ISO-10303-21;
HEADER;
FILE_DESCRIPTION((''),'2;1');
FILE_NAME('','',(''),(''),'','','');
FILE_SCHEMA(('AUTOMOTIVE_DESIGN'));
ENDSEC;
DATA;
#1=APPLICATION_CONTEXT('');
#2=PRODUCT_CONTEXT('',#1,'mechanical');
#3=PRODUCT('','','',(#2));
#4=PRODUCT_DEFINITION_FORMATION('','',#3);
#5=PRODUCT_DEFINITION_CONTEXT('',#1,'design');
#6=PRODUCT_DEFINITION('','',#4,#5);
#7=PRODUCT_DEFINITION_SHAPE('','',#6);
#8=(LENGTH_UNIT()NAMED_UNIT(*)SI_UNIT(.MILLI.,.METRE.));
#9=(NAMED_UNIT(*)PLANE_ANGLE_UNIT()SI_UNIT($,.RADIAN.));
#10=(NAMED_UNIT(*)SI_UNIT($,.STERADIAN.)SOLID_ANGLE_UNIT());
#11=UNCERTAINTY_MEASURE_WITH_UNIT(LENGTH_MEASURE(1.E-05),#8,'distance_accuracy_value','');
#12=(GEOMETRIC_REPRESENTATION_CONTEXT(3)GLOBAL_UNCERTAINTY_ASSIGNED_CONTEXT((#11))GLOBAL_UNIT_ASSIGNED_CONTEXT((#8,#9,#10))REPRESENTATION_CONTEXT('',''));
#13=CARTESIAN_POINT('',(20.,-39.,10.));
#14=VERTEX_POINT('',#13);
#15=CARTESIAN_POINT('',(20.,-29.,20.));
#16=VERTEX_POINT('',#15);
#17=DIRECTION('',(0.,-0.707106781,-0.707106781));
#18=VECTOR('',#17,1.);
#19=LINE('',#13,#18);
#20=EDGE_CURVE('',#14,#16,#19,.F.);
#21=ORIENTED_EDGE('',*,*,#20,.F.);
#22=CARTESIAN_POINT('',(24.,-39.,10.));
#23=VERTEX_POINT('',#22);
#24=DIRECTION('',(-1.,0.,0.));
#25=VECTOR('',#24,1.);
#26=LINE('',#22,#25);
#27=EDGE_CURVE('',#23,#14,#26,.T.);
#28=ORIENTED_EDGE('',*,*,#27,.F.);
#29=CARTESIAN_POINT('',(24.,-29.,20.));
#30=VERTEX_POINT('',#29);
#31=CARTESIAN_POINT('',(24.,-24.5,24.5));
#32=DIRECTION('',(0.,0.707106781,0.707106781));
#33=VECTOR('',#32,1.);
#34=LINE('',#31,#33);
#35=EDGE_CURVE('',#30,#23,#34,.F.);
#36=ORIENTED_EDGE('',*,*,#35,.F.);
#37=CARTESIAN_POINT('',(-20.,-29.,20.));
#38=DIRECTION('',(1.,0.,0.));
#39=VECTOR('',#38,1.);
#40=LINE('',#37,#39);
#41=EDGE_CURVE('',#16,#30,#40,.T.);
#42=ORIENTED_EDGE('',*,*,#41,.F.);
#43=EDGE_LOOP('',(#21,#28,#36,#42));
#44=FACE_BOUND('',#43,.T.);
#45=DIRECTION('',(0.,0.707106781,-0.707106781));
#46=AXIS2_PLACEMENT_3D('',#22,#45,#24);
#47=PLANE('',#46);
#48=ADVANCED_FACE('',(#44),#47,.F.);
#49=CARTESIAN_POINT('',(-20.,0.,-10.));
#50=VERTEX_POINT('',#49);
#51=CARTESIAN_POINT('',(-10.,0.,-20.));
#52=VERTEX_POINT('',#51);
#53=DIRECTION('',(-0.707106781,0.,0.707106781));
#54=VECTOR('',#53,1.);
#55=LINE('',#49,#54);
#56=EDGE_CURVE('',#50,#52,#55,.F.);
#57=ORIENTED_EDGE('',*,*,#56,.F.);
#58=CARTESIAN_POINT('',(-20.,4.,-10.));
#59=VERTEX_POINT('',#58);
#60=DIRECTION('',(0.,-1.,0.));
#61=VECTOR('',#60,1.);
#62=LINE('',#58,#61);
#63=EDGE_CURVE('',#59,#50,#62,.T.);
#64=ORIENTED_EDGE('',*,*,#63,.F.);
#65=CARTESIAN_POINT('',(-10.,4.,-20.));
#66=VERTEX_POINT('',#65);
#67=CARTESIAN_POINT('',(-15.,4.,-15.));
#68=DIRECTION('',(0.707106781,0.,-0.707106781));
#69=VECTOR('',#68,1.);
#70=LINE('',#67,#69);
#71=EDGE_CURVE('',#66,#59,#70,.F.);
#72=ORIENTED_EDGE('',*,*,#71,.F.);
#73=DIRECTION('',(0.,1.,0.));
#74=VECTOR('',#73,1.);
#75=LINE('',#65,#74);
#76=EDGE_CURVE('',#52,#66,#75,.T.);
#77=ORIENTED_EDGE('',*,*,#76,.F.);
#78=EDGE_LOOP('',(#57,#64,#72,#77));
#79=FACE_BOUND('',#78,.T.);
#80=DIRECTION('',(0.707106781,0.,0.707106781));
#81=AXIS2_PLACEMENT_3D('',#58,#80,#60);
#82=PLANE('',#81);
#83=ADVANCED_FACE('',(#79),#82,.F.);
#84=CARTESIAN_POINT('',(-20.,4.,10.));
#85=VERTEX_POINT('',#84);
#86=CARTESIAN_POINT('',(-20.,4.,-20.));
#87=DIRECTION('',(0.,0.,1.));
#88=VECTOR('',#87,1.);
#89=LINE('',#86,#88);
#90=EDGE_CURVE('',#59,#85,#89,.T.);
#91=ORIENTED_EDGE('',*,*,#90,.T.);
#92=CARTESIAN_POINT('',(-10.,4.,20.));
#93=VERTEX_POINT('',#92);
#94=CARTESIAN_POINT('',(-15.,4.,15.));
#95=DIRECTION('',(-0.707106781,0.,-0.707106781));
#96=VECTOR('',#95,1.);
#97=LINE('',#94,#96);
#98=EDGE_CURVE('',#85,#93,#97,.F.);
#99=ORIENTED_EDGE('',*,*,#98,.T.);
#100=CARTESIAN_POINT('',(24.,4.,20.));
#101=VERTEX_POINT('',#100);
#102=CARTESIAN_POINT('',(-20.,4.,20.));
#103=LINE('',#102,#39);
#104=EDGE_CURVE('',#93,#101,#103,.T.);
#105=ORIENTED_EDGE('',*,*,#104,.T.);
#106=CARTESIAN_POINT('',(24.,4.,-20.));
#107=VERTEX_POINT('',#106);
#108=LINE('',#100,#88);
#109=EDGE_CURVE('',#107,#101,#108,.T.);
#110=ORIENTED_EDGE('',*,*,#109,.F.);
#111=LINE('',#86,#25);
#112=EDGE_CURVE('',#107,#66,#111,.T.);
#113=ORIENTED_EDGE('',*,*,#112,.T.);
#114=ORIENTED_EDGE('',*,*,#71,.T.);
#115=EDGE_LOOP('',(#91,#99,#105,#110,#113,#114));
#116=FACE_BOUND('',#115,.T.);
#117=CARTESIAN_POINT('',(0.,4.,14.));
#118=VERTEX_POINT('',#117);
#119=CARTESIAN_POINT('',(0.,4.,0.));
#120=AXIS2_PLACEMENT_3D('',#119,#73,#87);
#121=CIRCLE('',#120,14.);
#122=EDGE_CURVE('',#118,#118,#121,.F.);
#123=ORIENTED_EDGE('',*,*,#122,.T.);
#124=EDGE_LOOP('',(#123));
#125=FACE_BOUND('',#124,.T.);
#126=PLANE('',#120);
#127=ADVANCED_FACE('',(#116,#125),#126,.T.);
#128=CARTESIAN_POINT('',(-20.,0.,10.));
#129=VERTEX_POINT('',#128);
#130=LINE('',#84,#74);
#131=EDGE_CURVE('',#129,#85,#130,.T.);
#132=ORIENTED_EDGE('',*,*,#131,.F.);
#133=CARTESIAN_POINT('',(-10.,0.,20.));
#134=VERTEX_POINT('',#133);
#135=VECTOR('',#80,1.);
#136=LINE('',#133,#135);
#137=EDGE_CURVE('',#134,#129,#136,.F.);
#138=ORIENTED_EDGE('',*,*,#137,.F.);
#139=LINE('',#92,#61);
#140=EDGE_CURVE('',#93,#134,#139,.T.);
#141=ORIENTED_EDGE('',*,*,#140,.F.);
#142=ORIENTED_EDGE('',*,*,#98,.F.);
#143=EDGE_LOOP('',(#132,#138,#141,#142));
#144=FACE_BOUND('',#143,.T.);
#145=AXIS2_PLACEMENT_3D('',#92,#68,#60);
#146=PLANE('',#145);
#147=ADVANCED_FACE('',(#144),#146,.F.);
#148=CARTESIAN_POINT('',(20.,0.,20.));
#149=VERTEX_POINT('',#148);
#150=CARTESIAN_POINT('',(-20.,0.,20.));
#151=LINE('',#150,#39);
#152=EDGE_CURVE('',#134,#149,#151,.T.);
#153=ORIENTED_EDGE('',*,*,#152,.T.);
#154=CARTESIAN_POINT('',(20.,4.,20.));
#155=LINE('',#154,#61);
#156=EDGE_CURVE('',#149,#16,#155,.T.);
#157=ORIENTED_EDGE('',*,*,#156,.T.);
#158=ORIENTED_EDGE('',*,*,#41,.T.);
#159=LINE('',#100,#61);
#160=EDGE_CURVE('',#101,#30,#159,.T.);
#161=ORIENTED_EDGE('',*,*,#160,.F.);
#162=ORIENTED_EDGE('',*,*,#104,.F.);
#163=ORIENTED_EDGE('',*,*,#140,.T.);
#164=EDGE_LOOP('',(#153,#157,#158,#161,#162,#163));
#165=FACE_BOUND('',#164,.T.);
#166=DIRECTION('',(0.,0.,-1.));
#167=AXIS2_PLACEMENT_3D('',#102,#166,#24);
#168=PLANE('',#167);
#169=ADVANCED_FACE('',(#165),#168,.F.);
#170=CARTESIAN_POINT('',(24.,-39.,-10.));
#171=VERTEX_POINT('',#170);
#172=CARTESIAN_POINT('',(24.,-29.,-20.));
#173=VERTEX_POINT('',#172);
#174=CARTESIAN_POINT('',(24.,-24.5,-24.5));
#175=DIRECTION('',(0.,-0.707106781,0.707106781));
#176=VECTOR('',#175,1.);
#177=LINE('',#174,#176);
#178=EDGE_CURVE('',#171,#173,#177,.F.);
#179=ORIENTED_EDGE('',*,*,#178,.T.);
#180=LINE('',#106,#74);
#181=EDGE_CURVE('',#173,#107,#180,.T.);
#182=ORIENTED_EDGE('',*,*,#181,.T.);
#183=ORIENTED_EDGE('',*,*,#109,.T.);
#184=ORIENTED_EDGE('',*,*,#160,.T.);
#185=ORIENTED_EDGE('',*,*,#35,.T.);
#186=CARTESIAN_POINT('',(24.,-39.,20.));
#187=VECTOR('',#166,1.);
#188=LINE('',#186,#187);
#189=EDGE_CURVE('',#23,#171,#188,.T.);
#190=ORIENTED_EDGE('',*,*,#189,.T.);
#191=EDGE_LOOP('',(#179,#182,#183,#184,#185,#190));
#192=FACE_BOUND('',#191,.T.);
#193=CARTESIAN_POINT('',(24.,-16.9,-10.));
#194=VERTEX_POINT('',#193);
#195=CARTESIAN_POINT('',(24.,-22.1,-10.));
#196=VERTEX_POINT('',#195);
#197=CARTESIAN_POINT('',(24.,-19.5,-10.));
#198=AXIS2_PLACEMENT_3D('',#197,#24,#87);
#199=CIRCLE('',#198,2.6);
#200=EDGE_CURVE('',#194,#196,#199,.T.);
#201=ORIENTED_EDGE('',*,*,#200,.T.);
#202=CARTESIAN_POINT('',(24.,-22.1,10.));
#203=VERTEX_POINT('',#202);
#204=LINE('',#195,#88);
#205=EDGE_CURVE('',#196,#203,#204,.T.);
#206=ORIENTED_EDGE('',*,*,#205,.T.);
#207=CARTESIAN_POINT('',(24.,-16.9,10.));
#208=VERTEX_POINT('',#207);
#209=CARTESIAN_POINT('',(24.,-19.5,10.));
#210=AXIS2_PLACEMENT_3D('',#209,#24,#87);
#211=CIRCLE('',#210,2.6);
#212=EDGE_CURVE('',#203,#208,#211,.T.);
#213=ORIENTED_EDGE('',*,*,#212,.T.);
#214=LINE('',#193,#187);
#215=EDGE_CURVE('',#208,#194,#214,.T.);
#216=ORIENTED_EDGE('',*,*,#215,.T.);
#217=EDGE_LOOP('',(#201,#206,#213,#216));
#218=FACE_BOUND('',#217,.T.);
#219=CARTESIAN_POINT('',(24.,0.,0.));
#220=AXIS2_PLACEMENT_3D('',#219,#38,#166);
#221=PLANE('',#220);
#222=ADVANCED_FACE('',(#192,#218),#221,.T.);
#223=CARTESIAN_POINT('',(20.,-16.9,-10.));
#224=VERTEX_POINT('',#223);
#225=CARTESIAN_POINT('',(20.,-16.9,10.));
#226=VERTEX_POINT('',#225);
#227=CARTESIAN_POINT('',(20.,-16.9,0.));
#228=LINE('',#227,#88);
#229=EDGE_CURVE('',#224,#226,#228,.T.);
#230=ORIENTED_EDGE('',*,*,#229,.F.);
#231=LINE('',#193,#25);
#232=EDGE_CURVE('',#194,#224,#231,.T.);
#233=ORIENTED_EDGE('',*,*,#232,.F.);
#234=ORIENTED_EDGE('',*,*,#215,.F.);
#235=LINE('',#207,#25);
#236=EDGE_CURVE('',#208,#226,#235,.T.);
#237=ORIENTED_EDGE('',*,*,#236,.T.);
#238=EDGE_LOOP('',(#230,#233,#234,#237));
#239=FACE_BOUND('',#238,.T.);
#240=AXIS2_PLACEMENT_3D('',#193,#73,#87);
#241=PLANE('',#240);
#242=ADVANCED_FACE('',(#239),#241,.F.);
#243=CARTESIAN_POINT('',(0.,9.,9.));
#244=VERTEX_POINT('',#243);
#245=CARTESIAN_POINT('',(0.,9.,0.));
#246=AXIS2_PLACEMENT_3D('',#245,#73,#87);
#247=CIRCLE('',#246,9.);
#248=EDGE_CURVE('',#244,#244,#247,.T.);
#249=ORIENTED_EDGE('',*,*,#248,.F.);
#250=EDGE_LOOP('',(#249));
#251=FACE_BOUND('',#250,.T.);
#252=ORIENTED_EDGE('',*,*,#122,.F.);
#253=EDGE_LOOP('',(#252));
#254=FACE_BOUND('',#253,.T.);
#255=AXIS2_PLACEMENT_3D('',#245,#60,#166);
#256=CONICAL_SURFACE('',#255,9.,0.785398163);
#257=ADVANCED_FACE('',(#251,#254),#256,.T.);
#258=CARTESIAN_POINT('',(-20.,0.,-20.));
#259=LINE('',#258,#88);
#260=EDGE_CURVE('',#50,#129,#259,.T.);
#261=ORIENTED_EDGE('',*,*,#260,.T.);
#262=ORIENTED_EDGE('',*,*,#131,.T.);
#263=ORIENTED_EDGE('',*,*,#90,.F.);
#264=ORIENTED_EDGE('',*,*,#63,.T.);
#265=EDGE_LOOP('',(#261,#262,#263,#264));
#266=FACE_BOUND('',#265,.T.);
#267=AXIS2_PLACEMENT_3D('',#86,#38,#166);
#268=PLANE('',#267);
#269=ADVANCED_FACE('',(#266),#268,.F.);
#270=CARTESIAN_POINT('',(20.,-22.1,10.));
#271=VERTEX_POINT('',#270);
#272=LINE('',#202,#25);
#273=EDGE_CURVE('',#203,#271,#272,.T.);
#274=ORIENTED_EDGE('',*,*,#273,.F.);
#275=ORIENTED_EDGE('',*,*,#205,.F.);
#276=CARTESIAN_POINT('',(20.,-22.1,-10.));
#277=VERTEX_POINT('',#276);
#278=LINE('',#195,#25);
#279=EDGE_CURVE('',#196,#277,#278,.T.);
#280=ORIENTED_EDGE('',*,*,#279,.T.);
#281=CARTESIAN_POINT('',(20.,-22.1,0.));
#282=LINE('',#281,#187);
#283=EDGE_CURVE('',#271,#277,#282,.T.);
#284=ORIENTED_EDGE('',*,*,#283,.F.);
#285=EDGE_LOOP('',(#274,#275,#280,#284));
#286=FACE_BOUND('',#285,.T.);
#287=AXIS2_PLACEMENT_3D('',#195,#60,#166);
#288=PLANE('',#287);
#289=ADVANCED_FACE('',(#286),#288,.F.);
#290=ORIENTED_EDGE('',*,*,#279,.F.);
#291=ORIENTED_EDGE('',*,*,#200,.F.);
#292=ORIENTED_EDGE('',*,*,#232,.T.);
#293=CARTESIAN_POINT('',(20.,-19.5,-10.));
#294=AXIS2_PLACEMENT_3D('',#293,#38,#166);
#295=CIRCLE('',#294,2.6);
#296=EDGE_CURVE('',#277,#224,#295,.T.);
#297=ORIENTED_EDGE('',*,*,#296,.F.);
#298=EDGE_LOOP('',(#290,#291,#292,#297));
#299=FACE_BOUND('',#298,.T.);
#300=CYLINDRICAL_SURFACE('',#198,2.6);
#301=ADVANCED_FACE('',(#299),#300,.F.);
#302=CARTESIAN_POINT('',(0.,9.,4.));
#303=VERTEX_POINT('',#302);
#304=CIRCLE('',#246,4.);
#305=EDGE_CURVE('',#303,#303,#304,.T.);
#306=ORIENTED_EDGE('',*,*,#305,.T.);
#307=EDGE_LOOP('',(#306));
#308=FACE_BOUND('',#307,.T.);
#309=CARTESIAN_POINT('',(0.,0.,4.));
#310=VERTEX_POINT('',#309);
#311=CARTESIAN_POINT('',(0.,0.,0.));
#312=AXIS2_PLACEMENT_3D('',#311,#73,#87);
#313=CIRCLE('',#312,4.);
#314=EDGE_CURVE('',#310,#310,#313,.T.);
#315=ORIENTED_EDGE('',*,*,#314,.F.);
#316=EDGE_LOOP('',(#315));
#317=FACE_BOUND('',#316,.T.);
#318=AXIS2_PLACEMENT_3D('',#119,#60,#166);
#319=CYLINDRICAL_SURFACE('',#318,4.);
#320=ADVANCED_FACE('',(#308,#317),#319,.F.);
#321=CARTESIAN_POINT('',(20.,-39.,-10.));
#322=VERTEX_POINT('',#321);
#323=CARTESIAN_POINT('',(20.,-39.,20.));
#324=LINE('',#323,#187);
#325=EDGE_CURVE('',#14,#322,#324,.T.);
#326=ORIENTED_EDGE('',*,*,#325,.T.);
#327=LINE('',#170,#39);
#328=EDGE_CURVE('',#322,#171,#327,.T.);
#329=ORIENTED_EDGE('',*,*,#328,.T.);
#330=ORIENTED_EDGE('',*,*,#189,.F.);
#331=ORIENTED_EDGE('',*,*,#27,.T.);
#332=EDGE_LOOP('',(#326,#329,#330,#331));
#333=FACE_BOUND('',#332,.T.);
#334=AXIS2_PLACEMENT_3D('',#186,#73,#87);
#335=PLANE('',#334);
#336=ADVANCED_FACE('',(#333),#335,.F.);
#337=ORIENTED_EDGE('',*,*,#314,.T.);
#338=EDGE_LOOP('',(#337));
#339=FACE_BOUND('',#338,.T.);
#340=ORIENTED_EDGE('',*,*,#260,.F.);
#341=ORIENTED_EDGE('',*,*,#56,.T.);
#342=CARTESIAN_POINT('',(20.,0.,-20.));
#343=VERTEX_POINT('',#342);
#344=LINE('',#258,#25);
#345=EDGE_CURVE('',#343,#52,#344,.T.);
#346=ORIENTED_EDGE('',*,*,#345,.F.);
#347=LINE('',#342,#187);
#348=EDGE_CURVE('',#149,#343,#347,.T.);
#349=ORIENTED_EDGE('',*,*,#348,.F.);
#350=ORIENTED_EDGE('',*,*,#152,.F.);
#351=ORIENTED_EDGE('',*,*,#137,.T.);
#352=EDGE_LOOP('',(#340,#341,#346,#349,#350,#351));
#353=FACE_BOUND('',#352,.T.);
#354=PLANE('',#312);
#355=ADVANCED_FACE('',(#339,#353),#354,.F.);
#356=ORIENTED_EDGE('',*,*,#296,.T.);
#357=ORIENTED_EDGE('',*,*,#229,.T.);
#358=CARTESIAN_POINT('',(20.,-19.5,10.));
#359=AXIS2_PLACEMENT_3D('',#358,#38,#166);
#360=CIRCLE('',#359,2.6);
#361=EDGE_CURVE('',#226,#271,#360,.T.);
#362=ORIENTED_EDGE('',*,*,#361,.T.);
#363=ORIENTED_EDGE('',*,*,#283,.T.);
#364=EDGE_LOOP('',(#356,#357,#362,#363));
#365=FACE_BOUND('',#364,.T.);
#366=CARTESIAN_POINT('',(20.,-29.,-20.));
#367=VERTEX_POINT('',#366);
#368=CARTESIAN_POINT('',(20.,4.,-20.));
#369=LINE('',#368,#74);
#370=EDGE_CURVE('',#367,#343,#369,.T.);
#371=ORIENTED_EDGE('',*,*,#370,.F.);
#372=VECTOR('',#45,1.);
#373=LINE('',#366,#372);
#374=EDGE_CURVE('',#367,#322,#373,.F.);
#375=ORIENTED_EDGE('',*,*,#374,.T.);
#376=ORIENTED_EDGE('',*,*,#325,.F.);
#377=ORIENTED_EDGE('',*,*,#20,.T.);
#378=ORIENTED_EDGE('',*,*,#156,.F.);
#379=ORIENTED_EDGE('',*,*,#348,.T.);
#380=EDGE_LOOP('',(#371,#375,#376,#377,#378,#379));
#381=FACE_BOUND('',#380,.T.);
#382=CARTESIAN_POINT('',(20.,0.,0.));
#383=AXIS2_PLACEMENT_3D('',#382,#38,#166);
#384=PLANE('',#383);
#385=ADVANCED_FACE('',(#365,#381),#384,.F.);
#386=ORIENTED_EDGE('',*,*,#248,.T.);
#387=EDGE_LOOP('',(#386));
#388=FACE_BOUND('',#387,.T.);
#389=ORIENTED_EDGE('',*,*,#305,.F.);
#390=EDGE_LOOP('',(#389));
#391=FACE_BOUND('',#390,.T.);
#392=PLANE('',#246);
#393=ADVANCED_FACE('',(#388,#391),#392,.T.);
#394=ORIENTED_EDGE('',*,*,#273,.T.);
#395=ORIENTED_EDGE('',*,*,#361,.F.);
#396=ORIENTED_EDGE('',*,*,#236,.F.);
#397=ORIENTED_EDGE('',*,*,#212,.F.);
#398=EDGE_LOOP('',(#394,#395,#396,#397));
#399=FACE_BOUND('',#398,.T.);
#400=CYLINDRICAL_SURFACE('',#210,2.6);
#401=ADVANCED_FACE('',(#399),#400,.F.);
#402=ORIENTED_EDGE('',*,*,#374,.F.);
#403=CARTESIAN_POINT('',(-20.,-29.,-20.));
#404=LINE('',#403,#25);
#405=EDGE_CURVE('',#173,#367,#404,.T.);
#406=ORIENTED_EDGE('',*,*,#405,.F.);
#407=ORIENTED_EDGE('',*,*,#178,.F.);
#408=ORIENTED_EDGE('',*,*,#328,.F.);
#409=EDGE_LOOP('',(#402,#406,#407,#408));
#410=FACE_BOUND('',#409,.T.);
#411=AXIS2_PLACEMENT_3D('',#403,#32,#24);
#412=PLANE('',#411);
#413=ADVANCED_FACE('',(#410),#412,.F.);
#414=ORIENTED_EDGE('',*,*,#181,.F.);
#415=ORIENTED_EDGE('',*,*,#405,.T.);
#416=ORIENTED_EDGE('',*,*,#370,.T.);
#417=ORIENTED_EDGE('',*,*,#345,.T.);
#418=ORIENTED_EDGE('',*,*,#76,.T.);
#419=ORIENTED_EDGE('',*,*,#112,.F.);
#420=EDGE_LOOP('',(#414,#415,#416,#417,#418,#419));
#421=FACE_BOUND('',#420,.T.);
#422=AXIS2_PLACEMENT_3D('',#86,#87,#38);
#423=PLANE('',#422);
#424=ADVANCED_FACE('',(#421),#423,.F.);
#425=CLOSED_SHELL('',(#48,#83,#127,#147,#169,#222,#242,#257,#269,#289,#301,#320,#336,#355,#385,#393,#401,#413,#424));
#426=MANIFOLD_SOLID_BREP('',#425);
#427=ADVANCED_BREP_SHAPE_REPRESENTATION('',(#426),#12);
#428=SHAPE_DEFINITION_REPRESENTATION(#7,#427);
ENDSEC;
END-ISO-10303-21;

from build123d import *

# Parameters (mm, degrees)
SKETCH1_W               = 40
SKETCH1_H               = 40
SKETCH1_R               = 4
BOSS_EXTRUDE1_DEPTH     = 4
SKETCH2_R               = 9
SKETCH2_R_2             = 4
BOSS_EXTRUDE2_DEPTH     = 5
SKETCH3_W               = 40
SKETCH3_H               = 43
BOSS_EXTRUDE3_DEPTH     = 4
CUT_EXTRUDE1_DEPTH      = 60.338014797
CUT_EXTRUDE1_DEPTH_BACK = 60.338014797
CHAMFER2_SIZE           = 5
CHAMFER3_SIZE           = 10


with BuildPart() as part:
    # Sketch1 → Boss-Extrude1 (new body)
    with BuildSketch(Plane(origin=(0, 0, 0), x_dir=(1, 0, 0), z_dir=(0, 1, 0))):
        Rectangle(SKETCH1_W, SKETCH1_H)
        with Locations(Location((0, 0, 0), (0, 0, 270))):
            Circle(SKETCH1_R, mode=Mode.SUBTRACT)
    extrude(amount=BOSS_EXTRUDE1_DEPTH)

    # Sketch2 → Boss-Extrude2 (add)
    with BuildSketch(Plane(origin=(0, 4, 0), x_dir=(1, 0, 0), z_dir=(0, 1, 0))):
        with Locations(Location((0, 0, 0), (0, 0, 270))):
            Circle(SKETCH2_R)
        with Locations(Location((0, 0, 0), (0, 0, 270))):
            Circle(SKETCH2_R_2, mode=Mode.SUBTRACT)
    extrude(amount=BOSS_EXTRUDE2_DEPTH)

    # Sketch3 → Boss-Extrude3 (add)
    with BuildSketch(Plane(origin=(20, 0, 0), x_dir=(0, 0, -1), z_dir=(1, 0, 0))):
        with Locations((0, -17.5)):
            Rectangle(SKETCH3_W, SKETCH3_H)
    extrude(amount=BOSS_EXTRUDE3_DEPTH)

    # Sketch4 → Cut-Extrude1 (cut, two sides: drawn at the far end of the back side and taken through both)
    with BuildSketch(Plane.ZY.offset(-20).offset(-CUT_EXTRUDE1_DEPTH_BACK)):
        with BuildLine():
            Line((-10, -16.9), (10, -16.9))
            ThreePointArc((10, -16.9), (12.6, -19.5), (10, -22.1))
            Line((10, -22.1), (-10, -22.1))
            ThreePointArc((-10, -22.1), (-12.6, -19.5), (-10, -16.9))
        make_face()
    extrude(amount=CUT_EXTRUDE1_DEPTH + CUT_EXTRUDE1_DEPTH_BACK, mode=Mode.SUBTRACT)

    # Chamfer2
    chamfer2_edges = [part.edges().sort_by_distance(p)[0] for p in [
        (0, 4, -9),
    ]]
    chamfer(chamfer2_edges, length=CHAMFER2_SIZE - 0.0001)  # a hair under: the kernel refuses the full size

    # Chamfer3
    chamfer3_edges = [part.edges().sort_by_distance(p)[0] for p in [
        (22, -39, 20),
        (22, -39, -20),
        (-20, 2, 20),
        (-20, 2, -20),
    ]]
    chamfer(chamfer3_edges, length=CHAMFER3_SIZE)


solid = part.part
